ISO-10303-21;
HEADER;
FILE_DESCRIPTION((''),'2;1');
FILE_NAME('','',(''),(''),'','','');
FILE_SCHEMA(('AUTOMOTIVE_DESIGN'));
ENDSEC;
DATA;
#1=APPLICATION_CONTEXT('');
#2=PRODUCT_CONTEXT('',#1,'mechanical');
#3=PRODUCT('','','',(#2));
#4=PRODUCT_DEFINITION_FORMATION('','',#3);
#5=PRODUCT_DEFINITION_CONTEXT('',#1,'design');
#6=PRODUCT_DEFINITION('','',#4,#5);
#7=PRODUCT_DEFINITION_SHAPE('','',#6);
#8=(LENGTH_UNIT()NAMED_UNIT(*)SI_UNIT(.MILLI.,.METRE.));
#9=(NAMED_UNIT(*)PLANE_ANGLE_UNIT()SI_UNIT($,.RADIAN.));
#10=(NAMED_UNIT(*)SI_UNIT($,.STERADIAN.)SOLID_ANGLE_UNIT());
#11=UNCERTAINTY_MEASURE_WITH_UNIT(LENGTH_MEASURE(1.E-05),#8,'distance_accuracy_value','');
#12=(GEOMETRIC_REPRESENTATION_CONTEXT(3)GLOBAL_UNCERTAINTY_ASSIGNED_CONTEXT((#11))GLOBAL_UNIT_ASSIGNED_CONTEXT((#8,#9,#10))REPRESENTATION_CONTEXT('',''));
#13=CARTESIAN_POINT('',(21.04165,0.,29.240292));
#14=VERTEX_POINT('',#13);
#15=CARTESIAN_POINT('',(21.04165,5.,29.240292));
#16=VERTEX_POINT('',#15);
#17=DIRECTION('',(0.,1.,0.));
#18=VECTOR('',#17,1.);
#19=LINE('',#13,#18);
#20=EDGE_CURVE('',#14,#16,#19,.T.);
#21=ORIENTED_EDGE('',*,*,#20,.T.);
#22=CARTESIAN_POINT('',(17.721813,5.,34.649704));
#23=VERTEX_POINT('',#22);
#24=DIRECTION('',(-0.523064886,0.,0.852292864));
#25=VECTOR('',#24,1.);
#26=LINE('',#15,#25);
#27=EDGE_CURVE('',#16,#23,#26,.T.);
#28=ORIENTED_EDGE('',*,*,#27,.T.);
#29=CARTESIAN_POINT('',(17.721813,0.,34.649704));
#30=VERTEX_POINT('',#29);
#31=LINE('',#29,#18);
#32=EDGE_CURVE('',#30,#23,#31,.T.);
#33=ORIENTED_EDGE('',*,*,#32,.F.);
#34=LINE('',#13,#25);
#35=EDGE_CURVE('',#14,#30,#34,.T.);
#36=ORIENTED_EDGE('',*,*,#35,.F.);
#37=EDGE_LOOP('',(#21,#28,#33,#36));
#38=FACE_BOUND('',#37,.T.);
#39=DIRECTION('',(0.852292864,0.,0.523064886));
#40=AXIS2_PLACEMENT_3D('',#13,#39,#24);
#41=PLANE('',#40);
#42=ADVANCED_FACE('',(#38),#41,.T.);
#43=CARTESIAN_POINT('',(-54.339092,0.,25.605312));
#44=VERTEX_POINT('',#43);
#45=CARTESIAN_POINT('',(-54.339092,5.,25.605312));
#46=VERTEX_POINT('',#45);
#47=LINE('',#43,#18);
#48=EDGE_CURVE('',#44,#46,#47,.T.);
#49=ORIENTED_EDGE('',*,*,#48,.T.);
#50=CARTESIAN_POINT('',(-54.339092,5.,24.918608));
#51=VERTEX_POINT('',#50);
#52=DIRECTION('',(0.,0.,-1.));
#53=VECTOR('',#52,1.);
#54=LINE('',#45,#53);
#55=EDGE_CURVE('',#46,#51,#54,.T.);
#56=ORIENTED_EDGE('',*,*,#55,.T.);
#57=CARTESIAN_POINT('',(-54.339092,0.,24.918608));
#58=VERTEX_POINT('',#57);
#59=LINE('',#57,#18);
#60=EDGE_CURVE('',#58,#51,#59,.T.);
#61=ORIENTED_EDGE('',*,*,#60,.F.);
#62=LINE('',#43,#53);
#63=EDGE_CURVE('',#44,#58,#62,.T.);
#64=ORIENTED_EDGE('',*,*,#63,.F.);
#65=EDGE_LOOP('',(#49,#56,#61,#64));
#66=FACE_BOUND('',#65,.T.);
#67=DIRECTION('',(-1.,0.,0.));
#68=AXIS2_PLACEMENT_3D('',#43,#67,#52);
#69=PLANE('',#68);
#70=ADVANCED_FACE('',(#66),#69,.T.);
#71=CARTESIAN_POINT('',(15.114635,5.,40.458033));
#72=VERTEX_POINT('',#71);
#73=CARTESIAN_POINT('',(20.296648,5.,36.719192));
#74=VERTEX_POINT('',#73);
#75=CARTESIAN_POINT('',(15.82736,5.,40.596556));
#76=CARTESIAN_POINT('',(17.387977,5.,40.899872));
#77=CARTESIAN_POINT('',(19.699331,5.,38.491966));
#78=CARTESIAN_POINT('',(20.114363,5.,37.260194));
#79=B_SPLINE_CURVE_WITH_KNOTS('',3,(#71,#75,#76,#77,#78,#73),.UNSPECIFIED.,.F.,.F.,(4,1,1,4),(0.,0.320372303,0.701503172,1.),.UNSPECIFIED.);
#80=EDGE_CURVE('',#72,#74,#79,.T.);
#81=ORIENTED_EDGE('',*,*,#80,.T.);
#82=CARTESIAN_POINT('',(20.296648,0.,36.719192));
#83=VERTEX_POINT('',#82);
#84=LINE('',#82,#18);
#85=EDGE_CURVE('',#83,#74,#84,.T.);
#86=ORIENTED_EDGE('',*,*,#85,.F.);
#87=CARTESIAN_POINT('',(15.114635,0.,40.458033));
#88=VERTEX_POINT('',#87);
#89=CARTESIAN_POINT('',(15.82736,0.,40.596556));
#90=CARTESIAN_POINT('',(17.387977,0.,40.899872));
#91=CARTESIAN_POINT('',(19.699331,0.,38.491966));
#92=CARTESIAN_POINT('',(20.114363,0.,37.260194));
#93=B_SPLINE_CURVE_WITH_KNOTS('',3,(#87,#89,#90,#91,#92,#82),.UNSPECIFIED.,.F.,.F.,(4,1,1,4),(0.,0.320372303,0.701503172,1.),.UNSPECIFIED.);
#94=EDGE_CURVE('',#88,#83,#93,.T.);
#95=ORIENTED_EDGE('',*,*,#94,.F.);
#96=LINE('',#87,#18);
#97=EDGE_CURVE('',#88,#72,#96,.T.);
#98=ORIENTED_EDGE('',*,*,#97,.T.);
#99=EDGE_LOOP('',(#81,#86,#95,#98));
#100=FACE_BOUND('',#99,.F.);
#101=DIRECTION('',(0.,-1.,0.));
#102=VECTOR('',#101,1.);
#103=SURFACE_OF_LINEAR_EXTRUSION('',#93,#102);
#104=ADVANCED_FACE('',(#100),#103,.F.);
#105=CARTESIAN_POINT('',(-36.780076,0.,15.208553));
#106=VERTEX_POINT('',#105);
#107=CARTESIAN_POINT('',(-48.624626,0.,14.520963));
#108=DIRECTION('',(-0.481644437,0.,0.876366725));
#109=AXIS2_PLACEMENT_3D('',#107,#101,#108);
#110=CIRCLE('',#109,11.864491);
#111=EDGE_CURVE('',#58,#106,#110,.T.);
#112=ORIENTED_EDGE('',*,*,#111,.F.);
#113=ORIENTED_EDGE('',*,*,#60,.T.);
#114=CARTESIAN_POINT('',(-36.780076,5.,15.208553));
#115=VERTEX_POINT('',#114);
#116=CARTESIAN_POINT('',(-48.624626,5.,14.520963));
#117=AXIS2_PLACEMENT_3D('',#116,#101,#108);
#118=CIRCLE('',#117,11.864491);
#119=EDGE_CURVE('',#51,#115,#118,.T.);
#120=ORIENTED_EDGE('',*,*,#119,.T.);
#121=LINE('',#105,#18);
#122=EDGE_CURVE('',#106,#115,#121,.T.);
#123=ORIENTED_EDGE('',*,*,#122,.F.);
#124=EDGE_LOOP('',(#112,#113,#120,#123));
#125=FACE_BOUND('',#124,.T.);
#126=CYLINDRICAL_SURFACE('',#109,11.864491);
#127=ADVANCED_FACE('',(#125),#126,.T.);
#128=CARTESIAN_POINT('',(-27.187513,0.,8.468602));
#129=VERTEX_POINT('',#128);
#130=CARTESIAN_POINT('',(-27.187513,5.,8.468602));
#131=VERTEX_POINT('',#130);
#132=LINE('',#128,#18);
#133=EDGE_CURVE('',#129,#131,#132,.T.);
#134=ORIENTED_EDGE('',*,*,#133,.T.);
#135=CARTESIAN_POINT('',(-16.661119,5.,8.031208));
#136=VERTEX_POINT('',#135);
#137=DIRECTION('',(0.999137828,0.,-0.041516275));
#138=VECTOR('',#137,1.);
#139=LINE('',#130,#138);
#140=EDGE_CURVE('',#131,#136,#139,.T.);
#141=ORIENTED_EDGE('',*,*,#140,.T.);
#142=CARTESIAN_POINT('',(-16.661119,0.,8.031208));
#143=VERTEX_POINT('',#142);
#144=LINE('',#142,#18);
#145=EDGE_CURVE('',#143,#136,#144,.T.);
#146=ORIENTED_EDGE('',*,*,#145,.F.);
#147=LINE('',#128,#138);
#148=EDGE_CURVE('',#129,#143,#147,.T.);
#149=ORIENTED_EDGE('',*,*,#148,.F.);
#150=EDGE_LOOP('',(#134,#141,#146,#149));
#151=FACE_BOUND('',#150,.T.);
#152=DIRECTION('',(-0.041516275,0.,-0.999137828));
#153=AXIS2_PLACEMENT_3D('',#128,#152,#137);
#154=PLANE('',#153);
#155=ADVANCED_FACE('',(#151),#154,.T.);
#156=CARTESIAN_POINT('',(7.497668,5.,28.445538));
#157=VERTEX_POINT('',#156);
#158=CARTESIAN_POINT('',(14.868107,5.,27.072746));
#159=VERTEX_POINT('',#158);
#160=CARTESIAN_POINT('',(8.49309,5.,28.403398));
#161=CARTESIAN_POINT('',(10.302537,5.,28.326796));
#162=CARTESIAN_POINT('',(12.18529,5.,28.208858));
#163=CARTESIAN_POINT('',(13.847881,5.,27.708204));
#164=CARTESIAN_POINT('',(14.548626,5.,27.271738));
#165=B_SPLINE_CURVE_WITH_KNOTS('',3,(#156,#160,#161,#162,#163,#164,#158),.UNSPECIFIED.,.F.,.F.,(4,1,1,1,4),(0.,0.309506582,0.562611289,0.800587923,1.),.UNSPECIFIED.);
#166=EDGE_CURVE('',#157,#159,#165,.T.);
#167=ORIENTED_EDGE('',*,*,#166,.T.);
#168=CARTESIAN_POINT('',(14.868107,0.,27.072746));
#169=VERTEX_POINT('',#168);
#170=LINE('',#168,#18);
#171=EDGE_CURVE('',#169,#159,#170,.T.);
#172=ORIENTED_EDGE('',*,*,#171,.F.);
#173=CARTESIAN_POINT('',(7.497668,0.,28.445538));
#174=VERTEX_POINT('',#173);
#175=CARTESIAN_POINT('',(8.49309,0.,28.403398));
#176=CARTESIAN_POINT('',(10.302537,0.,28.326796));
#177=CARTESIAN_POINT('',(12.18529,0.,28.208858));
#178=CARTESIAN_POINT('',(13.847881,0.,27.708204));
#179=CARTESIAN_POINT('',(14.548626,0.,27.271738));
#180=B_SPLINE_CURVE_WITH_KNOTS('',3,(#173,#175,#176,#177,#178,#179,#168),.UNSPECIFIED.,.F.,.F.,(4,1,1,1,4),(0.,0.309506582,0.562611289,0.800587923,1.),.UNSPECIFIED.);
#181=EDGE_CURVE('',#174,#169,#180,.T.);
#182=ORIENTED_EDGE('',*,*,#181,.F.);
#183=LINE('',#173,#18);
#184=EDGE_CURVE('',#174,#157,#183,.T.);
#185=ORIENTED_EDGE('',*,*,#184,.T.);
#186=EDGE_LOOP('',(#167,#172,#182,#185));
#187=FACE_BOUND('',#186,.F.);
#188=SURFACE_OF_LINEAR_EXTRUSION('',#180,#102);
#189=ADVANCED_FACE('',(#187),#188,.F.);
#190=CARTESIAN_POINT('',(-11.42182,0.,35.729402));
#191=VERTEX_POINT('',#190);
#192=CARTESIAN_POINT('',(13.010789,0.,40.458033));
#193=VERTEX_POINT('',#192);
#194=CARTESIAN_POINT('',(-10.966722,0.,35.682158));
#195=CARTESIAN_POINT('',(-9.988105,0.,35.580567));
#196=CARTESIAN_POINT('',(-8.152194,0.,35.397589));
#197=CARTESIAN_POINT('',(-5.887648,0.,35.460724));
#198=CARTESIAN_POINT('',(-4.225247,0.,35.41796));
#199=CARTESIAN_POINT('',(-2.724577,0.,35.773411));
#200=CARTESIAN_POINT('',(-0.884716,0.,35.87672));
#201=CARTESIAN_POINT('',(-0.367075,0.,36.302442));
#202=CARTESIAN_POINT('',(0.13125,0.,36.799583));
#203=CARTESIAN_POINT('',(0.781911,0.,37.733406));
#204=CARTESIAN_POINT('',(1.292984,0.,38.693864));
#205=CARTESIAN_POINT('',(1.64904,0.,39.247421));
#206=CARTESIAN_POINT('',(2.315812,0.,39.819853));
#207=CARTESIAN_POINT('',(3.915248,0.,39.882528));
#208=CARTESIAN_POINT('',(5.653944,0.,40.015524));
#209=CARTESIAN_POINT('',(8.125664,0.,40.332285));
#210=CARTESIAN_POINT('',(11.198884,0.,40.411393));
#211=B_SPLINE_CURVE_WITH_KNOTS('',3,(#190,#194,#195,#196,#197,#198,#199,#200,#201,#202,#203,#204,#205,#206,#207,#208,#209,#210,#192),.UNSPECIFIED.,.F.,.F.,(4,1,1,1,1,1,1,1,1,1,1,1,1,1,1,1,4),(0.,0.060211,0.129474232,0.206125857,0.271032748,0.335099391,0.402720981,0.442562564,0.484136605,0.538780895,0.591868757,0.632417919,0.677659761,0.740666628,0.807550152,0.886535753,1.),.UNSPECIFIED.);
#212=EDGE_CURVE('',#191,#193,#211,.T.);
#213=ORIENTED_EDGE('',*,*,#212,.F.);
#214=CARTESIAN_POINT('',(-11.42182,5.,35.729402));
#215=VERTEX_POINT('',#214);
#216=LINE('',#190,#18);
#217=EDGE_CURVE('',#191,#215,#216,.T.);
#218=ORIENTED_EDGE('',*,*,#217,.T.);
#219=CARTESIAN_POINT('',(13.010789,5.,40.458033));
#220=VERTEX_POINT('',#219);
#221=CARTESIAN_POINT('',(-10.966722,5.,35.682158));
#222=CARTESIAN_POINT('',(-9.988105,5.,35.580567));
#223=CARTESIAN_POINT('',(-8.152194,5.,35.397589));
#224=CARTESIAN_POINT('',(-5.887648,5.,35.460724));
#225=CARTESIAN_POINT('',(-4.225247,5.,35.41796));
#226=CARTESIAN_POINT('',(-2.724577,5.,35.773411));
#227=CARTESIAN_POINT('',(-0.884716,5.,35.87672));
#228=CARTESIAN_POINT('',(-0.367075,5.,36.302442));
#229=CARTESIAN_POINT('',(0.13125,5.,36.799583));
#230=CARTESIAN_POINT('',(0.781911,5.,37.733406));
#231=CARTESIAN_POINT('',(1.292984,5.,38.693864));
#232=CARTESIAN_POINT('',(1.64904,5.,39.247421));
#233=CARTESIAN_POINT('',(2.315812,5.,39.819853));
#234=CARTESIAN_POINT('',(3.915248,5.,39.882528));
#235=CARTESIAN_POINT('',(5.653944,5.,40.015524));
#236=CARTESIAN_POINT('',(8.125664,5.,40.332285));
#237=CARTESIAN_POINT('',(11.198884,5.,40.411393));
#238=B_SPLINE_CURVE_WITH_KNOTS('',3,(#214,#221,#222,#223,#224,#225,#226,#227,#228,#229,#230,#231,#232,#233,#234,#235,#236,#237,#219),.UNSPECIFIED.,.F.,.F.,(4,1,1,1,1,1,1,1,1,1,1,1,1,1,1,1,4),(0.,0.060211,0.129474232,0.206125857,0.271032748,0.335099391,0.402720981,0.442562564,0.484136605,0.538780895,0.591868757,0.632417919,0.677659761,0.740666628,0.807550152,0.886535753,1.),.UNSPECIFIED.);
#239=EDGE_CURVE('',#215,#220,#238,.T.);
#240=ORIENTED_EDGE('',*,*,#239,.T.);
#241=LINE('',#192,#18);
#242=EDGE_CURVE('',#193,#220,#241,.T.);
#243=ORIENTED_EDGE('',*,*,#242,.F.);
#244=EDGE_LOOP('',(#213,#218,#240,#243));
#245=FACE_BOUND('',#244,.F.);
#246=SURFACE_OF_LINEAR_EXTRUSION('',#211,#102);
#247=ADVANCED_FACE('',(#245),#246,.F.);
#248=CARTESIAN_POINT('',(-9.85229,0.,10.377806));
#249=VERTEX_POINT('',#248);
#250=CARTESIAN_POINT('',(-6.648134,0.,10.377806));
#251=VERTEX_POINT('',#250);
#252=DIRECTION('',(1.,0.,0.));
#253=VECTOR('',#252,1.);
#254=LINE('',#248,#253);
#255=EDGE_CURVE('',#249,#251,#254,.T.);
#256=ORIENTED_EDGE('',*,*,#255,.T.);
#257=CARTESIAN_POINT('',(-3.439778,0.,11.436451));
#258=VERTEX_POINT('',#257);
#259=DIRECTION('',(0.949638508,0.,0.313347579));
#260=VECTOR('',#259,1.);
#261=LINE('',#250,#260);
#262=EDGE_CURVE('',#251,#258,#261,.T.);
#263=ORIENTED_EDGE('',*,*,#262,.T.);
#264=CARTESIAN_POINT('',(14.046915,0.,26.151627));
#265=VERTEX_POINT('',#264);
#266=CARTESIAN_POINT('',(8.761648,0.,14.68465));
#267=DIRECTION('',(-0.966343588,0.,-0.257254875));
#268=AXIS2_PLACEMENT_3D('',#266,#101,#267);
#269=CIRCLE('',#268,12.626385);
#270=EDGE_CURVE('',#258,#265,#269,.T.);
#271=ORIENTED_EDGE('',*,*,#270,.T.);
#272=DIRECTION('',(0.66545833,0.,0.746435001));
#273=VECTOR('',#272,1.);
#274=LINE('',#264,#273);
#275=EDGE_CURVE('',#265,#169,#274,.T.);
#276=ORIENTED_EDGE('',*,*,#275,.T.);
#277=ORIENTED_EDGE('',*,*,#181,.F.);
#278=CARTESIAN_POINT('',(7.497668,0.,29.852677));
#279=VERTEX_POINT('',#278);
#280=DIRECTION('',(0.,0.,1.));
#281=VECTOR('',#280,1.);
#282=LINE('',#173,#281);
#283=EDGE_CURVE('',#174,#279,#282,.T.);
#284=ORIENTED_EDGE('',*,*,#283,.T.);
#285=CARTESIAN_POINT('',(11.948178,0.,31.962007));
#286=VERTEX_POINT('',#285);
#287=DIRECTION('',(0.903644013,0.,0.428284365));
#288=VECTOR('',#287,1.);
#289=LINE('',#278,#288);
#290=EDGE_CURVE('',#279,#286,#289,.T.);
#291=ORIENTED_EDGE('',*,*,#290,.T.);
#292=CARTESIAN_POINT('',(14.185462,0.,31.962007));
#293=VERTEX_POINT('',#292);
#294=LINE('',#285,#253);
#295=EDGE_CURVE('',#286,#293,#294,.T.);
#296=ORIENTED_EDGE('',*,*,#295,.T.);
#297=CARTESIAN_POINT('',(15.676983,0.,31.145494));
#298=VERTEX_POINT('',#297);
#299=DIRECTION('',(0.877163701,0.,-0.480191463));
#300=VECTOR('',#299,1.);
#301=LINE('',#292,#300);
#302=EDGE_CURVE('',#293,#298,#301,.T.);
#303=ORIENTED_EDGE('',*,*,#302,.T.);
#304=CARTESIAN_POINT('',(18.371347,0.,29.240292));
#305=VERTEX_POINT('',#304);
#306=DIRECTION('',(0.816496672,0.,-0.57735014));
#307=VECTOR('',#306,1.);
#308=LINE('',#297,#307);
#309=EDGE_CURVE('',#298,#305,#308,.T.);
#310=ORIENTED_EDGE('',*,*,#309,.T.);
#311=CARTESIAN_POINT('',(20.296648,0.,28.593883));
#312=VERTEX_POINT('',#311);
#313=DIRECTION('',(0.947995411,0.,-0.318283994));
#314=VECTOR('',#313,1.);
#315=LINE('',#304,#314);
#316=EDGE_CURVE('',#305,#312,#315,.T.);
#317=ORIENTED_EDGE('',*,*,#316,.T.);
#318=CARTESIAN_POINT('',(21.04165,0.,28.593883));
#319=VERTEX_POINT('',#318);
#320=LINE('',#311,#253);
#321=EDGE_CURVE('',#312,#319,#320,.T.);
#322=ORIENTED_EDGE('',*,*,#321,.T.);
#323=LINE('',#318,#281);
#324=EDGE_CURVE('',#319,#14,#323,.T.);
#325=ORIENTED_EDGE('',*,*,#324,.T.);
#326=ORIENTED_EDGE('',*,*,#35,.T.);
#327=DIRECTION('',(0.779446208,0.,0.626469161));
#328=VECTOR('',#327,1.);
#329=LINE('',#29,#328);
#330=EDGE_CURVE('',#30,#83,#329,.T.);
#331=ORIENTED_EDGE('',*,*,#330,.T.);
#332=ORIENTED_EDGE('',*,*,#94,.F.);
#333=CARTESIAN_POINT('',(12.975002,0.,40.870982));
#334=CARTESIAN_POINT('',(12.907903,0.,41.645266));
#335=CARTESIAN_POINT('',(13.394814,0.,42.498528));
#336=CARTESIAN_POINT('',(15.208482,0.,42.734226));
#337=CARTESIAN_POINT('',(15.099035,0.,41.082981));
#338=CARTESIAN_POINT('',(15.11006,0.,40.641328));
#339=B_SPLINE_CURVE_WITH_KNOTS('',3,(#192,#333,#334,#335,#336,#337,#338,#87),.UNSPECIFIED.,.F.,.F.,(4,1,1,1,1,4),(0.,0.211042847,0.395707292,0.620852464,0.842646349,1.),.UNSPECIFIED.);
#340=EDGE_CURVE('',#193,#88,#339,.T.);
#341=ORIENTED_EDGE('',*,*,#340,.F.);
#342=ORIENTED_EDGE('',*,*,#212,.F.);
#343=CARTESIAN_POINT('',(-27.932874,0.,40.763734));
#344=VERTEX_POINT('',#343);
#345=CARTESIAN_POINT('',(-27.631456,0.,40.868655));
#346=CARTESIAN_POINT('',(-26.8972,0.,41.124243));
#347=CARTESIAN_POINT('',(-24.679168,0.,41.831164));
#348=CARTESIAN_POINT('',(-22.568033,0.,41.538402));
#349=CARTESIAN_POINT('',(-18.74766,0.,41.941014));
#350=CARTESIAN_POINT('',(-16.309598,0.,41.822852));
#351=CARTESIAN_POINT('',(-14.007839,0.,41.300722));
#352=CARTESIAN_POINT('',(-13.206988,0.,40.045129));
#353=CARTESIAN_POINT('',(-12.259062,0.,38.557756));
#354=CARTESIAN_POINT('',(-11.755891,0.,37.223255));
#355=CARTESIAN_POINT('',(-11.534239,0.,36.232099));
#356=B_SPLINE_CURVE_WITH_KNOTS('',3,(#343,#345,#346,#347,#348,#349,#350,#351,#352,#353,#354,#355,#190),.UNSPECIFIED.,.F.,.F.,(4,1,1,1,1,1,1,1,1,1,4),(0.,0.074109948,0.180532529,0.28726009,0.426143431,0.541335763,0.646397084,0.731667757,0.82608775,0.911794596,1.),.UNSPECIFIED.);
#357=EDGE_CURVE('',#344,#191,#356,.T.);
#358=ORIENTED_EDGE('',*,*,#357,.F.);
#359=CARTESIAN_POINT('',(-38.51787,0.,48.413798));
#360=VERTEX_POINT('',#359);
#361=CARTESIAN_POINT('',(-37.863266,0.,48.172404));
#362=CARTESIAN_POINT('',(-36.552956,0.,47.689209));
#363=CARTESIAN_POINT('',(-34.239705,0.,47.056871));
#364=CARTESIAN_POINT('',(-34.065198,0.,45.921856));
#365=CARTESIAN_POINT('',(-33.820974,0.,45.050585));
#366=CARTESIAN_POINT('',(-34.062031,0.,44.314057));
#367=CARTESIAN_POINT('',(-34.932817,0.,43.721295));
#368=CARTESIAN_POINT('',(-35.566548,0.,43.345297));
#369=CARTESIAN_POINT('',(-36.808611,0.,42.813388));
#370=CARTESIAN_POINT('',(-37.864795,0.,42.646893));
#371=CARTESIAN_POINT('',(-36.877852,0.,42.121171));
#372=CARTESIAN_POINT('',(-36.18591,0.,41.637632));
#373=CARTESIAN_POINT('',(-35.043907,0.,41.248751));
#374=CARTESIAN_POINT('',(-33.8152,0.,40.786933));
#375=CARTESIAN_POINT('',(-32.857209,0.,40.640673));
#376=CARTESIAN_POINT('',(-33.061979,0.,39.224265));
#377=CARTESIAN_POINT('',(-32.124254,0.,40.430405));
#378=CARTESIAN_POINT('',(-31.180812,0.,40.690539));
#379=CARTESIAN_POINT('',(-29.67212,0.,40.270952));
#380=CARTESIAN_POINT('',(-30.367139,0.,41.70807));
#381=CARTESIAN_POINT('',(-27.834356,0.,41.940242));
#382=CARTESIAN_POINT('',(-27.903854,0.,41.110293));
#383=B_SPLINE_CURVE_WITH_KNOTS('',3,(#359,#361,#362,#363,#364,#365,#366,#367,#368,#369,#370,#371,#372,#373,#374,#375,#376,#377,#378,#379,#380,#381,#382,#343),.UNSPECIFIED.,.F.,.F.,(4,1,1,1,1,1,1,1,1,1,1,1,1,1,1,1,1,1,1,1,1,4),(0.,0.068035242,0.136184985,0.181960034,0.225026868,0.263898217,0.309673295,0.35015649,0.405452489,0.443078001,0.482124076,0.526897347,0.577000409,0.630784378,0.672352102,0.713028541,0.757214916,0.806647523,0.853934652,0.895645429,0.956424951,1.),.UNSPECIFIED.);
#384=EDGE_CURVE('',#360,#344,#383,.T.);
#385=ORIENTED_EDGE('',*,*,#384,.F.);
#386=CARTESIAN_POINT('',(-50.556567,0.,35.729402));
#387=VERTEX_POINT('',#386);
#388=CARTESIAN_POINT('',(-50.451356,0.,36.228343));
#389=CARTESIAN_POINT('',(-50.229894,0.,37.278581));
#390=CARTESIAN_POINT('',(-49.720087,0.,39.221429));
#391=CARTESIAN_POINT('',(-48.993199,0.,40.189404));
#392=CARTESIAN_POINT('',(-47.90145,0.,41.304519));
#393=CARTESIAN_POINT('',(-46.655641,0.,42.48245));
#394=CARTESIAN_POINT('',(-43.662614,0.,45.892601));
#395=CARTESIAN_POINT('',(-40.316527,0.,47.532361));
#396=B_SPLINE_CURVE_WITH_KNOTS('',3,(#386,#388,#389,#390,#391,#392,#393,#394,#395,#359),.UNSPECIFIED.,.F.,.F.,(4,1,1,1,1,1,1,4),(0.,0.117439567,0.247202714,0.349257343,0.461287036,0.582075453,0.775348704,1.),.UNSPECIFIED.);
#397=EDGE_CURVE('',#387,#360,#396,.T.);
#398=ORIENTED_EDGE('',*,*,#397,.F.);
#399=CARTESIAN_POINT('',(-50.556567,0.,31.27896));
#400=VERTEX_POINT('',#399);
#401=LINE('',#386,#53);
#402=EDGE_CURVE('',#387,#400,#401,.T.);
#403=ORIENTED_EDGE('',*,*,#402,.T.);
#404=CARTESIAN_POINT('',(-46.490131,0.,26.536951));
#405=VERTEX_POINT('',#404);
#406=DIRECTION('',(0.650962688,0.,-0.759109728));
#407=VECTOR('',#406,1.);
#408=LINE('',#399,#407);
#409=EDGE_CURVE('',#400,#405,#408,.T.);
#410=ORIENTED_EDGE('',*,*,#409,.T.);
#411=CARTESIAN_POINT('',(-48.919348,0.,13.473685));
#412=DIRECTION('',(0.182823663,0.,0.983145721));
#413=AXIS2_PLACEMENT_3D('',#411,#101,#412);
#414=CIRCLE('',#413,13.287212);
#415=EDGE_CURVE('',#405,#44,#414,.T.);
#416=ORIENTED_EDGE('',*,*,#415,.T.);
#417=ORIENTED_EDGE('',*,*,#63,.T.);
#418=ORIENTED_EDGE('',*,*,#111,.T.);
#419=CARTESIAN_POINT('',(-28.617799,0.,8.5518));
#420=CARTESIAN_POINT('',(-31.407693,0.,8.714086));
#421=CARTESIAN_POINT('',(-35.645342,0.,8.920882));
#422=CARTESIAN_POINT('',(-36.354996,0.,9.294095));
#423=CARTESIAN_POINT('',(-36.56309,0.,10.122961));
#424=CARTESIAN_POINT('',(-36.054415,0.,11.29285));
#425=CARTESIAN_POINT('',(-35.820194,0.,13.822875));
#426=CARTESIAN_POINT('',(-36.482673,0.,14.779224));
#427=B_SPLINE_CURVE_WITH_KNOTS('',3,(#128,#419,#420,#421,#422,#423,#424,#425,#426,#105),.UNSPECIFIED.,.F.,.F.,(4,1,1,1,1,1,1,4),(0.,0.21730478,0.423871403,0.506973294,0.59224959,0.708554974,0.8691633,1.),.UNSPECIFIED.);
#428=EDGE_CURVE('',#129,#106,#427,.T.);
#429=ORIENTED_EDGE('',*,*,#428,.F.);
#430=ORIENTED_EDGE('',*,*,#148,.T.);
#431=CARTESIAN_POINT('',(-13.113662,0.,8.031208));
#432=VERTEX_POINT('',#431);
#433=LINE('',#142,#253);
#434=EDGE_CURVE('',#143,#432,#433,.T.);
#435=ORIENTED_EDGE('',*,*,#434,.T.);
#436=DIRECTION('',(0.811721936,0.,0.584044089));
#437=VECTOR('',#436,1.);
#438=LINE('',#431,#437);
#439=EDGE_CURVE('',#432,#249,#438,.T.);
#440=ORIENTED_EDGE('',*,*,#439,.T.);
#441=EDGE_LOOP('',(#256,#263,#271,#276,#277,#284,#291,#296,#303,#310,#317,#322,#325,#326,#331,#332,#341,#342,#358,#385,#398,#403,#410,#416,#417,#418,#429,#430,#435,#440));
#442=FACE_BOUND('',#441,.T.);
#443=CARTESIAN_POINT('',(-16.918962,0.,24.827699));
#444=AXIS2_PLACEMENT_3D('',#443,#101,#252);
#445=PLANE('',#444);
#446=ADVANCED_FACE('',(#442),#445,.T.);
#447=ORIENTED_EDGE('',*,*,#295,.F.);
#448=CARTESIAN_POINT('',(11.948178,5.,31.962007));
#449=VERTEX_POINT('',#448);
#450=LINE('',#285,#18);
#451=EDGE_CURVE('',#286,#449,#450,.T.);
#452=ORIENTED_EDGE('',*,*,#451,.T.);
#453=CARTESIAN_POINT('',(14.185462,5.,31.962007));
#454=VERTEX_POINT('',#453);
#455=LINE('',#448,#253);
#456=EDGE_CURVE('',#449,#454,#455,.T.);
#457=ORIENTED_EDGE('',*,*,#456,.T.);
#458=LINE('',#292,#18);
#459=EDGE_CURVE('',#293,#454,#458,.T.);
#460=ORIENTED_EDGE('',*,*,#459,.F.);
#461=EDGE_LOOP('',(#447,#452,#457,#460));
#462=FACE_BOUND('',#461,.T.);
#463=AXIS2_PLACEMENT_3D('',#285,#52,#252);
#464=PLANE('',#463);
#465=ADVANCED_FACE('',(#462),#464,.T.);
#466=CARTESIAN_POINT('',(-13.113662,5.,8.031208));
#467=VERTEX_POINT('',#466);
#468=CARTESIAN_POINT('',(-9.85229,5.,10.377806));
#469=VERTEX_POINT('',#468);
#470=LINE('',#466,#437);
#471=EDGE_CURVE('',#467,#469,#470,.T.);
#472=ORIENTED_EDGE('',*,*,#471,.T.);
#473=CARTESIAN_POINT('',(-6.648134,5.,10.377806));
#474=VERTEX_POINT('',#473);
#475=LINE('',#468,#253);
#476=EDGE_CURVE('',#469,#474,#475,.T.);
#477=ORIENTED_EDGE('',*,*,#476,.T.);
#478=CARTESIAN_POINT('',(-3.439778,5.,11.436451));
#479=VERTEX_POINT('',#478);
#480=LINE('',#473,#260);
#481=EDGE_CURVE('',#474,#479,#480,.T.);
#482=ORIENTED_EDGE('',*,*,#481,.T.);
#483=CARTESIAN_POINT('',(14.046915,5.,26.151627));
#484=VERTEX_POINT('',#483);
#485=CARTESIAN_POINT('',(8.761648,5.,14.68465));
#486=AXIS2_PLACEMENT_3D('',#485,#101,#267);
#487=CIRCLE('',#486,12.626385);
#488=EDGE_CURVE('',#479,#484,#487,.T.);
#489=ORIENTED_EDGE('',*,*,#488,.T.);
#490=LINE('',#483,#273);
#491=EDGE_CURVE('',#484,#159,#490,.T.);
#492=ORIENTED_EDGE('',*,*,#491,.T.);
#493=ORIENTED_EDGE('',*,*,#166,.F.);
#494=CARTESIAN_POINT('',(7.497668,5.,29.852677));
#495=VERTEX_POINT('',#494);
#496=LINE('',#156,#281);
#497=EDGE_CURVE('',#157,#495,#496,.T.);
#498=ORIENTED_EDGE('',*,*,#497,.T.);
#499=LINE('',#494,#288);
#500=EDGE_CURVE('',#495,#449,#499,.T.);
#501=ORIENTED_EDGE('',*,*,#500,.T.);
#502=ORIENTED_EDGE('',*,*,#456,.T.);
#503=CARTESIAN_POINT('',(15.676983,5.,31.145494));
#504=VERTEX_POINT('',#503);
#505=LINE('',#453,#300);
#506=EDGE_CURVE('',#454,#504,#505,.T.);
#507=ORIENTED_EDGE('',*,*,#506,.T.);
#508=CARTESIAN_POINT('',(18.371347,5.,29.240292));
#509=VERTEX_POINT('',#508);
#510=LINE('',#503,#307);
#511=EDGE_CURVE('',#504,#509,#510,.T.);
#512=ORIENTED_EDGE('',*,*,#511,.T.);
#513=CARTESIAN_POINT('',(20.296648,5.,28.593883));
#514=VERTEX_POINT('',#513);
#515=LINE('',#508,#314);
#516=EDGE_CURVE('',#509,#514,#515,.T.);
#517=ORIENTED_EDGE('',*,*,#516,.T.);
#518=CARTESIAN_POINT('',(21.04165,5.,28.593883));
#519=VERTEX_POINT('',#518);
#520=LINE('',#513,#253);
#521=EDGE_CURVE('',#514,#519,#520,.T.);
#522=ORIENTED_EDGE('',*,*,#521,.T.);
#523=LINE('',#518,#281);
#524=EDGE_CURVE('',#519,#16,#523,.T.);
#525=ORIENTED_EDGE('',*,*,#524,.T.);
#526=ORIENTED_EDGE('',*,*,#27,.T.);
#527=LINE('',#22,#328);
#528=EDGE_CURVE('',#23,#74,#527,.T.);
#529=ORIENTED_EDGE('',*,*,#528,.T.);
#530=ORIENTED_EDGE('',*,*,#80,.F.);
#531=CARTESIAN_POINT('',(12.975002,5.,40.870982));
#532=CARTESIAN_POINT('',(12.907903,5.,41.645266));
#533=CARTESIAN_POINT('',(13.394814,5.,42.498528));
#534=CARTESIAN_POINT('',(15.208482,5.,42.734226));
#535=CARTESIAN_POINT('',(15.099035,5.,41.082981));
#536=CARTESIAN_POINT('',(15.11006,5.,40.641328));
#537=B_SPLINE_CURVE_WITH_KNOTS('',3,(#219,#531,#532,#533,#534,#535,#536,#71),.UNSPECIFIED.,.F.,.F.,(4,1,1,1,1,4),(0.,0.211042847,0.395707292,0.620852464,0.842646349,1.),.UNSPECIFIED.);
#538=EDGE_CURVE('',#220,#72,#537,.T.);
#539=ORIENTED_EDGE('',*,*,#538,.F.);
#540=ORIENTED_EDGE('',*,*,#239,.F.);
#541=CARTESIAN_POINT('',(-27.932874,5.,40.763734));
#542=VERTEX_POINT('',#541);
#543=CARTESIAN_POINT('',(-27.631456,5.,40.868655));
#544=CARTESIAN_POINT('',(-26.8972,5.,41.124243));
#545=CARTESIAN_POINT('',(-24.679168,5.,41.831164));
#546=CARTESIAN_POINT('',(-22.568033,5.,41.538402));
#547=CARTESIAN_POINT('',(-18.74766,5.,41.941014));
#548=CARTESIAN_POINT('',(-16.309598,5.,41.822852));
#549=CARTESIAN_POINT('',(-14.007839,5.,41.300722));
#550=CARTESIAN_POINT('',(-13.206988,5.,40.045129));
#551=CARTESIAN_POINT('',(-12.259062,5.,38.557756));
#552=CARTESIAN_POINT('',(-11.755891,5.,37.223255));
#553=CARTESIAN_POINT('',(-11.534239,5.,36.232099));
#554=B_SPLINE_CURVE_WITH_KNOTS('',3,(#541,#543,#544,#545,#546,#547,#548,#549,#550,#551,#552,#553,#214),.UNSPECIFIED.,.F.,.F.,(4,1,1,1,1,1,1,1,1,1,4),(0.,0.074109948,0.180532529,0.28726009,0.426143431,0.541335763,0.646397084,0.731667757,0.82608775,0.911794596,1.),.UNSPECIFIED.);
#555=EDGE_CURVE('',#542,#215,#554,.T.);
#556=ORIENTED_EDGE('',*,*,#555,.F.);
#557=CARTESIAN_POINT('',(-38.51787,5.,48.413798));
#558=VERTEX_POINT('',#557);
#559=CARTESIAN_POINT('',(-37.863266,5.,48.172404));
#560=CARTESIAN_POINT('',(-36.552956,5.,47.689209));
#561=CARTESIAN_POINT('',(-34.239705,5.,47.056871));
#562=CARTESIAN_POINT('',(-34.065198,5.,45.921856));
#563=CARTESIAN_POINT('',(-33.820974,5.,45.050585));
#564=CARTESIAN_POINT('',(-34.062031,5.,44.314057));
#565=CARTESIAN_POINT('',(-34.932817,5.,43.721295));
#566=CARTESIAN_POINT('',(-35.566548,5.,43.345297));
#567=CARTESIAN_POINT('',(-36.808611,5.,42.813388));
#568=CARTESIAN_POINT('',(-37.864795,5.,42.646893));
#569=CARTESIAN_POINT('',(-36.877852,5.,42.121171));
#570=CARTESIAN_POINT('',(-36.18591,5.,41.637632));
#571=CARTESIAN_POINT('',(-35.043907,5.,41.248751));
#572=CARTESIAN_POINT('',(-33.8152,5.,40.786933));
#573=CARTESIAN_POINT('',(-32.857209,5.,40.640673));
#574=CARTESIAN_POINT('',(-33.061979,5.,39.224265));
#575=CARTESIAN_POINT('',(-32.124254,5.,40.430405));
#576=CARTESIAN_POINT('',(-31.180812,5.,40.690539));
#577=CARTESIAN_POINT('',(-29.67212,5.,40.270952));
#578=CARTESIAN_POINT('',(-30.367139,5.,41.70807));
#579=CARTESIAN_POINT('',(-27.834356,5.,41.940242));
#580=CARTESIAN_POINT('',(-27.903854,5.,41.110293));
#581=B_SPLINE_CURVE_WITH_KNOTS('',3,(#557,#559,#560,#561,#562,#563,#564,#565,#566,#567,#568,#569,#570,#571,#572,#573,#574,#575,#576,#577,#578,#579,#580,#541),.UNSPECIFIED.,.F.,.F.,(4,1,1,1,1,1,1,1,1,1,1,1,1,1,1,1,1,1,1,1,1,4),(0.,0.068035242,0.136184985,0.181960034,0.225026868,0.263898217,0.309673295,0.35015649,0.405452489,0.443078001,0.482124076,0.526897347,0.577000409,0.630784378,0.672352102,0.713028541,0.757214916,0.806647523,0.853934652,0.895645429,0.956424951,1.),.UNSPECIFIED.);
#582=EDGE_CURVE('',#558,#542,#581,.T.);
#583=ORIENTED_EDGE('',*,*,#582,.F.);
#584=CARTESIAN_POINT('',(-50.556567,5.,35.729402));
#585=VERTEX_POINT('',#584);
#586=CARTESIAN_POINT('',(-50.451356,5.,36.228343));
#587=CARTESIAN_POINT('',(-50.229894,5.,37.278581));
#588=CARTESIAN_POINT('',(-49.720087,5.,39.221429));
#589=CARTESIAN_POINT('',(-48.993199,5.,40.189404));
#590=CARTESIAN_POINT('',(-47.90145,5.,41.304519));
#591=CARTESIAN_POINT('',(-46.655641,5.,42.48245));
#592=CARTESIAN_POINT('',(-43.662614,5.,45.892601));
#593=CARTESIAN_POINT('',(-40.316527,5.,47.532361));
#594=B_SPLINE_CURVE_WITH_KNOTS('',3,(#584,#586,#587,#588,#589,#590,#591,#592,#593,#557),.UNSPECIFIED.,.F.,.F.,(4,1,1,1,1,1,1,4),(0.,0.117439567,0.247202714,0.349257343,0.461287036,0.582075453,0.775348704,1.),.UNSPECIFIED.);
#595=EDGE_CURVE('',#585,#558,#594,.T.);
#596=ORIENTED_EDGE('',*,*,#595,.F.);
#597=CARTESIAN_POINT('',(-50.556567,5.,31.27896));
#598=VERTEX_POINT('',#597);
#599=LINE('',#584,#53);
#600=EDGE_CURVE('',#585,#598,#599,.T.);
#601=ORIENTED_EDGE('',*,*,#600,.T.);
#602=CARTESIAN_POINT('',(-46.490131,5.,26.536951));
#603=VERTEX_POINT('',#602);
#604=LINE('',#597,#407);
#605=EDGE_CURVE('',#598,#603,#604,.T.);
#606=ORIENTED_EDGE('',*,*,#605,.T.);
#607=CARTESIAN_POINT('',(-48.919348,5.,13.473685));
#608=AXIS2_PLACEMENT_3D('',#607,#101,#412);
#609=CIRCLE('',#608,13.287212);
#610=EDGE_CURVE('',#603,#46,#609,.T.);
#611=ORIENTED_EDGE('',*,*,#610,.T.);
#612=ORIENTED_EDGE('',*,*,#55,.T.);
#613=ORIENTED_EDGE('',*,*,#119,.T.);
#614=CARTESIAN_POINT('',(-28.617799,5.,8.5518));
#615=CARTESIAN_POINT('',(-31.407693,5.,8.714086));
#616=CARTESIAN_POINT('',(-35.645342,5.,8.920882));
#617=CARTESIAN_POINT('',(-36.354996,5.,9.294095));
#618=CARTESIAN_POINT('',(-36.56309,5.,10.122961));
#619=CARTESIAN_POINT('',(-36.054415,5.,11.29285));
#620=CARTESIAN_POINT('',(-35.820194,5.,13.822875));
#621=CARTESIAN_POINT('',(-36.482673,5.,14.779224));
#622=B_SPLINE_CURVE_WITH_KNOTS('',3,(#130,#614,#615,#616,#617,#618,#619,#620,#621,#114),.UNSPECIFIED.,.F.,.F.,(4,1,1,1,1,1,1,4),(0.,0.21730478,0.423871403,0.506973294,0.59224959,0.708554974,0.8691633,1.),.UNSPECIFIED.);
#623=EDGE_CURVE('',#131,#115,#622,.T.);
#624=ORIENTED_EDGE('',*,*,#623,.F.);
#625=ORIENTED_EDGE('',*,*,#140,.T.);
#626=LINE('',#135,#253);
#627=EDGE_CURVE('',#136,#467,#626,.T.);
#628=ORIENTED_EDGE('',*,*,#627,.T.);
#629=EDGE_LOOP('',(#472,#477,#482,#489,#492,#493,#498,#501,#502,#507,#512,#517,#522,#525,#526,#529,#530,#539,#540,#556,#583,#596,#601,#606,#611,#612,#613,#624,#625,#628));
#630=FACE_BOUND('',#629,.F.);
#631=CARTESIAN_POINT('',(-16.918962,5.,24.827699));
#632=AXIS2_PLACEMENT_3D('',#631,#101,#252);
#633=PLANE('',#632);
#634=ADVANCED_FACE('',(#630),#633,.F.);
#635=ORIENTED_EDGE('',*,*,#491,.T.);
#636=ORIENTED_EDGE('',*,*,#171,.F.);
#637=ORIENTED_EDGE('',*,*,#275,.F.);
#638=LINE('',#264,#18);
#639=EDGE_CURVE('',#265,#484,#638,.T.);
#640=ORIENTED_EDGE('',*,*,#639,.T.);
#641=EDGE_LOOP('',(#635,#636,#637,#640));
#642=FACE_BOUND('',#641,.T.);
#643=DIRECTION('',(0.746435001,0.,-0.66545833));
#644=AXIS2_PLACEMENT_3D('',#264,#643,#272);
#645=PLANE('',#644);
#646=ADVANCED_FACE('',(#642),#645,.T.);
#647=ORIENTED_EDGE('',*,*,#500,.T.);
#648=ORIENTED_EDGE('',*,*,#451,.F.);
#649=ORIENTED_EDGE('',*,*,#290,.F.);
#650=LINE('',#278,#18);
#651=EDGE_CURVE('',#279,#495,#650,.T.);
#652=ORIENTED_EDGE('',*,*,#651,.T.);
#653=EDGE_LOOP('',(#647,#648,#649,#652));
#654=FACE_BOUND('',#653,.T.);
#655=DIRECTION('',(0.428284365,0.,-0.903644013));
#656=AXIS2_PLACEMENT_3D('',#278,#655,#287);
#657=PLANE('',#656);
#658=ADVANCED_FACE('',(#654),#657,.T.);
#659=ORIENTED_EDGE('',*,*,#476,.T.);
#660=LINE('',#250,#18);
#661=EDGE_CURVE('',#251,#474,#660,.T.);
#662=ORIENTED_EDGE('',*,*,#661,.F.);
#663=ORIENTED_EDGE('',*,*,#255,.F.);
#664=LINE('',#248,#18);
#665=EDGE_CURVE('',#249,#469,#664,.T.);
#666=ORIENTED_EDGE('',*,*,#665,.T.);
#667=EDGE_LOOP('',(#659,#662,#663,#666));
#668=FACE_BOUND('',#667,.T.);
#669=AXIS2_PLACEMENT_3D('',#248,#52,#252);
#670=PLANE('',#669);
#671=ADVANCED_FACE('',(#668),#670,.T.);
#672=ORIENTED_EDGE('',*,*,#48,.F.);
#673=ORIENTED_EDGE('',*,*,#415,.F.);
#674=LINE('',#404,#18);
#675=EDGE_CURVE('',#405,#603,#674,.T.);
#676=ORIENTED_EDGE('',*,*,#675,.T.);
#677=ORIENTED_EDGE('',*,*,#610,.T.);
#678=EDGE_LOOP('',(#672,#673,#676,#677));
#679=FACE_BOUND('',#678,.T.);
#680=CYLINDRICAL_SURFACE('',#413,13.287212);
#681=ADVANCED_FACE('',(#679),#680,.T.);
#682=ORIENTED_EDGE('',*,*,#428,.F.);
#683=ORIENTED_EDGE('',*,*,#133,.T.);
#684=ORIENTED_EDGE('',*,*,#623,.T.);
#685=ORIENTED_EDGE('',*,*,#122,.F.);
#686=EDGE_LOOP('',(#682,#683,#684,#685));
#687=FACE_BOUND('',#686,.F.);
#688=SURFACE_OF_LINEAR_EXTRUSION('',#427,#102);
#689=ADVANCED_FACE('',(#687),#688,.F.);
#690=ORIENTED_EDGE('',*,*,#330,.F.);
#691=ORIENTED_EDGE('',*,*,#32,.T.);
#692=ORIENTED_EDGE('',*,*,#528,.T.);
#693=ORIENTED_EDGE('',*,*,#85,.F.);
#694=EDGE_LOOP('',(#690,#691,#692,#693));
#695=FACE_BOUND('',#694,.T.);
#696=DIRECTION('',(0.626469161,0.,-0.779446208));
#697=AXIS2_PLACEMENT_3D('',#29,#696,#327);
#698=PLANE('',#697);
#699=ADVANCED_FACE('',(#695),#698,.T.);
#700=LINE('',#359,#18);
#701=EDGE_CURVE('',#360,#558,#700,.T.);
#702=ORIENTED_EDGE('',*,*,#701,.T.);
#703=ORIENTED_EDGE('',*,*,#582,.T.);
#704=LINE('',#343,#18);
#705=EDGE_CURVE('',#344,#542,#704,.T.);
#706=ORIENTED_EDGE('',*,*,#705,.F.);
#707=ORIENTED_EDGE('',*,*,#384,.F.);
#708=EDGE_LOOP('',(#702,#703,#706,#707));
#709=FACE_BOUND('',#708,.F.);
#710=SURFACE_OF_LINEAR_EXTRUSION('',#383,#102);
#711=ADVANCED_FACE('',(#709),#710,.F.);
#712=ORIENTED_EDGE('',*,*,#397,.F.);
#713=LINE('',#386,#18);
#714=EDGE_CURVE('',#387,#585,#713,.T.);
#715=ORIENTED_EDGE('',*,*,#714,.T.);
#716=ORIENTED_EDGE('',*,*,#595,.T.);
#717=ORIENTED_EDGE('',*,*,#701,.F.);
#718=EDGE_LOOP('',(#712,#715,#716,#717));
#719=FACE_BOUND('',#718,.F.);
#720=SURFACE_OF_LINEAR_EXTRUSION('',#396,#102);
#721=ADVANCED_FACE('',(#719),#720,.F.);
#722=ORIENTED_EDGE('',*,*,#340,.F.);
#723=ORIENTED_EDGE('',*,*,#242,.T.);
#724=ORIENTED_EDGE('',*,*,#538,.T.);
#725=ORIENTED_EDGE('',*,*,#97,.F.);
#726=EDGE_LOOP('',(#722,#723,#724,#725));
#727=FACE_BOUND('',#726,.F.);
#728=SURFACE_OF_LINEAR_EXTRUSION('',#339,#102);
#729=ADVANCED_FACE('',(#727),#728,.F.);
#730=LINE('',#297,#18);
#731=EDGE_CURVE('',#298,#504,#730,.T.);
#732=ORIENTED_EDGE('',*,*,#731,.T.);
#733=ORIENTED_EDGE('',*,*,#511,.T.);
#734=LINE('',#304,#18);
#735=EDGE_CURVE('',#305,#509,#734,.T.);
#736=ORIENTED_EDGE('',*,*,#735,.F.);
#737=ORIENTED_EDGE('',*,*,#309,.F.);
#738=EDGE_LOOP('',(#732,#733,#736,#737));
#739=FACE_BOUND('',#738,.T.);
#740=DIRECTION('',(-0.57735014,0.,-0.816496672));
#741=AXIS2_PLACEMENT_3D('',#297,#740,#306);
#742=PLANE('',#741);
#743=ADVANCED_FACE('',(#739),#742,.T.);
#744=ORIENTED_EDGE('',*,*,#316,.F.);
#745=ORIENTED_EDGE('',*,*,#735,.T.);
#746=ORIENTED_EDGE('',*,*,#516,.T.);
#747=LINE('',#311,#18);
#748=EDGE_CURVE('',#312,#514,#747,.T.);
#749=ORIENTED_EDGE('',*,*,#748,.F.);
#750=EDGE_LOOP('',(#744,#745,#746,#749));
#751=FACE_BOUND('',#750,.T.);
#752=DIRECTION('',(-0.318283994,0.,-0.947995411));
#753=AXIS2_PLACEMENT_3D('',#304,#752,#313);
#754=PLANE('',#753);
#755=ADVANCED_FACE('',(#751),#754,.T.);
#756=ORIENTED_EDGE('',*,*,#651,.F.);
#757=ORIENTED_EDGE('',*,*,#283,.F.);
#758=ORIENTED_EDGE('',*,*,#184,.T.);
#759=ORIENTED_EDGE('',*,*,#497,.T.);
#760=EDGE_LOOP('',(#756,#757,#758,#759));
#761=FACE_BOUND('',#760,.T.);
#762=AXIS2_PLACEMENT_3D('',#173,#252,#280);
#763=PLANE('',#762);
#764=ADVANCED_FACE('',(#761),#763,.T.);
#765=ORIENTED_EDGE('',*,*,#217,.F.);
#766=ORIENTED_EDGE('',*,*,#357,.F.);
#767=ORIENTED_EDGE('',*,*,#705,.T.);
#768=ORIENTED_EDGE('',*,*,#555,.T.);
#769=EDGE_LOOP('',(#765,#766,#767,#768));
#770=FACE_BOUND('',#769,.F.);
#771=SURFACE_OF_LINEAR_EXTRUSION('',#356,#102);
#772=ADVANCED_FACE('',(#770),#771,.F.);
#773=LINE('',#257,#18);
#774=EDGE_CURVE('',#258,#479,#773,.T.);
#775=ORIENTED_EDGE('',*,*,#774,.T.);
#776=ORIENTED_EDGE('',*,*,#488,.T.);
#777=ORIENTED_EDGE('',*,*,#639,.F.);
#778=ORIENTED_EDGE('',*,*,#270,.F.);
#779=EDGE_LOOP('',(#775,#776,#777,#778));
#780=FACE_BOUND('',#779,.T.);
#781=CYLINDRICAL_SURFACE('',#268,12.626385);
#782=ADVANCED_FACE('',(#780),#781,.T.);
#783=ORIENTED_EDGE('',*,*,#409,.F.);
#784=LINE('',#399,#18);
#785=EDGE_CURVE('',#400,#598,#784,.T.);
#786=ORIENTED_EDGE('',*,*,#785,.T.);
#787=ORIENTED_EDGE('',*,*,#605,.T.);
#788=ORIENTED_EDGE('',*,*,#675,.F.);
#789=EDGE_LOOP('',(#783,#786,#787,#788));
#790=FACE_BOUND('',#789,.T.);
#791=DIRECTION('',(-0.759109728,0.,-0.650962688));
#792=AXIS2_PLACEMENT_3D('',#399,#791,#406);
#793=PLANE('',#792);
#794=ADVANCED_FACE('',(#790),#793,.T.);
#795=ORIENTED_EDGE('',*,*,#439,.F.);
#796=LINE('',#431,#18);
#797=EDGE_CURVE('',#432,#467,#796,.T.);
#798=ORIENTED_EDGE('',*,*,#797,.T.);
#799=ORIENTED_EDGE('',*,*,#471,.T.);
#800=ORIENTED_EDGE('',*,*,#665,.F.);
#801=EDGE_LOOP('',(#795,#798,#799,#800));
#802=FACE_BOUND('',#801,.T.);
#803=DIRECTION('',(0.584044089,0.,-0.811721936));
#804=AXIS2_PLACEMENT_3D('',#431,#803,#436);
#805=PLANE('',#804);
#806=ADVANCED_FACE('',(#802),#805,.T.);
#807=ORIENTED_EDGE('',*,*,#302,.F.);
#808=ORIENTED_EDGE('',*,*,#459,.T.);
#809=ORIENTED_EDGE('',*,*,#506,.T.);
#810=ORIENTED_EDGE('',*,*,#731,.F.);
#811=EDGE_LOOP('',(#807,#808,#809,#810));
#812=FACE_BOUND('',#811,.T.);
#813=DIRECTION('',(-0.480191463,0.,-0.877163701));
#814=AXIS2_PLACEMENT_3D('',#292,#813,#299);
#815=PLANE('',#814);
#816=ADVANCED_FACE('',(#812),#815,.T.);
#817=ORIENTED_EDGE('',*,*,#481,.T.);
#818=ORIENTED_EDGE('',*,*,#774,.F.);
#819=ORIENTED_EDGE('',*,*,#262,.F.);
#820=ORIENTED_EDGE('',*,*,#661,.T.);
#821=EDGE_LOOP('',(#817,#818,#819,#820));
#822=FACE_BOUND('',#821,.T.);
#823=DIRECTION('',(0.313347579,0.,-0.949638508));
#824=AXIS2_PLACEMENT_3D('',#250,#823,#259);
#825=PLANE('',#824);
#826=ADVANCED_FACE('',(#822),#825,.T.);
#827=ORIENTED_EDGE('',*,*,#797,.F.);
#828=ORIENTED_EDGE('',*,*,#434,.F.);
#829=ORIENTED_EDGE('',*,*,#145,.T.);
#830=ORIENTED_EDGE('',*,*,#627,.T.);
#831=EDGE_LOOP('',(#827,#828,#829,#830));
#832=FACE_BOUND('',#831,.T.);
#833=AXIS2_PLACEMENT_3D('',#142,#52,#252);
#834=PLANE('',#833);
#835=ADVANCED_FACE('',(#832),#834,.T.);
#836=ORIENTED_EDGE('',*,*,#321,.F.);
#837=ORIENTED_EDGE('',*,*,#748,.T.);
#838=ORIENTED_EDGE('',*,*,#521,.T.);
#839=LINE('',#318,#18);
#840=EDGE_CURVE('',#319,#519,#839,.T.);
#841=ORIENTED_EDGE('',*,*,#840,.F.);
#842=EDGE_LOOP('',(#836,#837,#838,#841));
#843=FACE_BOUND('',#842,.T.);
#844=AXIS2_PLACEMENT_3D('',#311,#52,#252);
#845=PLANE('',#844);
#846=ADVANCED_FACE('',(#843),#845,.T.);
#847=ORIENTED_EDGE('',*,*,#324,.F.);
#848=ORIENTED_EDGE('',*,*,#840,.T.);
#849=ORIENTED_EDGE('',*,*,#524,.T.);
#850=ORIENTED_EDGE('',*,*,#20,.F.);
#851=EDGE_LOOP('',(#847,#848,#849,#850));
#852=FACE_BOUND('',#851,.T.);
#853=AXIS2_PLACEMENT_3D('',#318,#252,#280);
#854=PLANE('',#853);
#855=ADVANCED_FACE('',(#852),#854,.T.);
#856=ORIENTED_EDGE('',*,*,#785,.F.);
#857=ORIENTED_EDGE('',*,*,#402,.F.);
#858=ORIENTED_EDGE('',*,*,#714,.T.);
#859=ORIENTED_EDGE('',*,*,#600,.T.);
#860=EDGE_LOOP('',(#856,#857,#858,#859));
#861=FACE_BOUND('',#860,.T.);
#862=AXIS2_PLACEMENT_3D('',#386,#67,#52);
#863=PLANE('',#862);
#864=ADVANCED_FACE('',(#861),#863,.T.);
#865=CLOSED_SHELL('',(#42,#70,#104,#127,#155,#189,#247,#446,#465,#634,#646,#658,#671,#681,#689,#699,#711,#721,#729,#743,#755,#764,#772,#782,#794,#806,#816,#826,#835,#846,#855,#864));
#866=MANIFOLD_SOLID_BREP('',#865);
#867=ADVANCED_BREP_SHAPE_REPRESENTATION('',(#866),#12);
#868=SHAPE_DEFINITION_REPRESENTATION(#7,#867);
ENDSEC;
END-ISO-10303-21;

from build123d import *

# Parameters (mm, degrees)
F2_DEPTH  = 10
F14_SCALE = 0.5


# Not quite as in the source:
# - a feature names something its author has since deleted; it is built from what else it names
# - the program builds the solid bodies; features that only make, move or delete a surface that nothing else refers to are left out


with BuildPart() as f2:
    # F0 (on Front) → F2 (new body)
    with BuildSketch(Plane.XZ):
        with BuildLine():
            Line((-70.1603144407, 2.7968266513), (-70.1603144407, 1.4234187547))
            ThreePointArc((-70.1603144407, 1.4234187547), (-70.2145489266, -40.1372623928), (-35.0422821939, -17.99669303))
            add(Edge.make_bspline(
                [(-15.8571563661, -31.4765945077), (-18.7177282322, -31.3101976564), (-24.2975162547, -30.9856264864), (-32.7728139412, -30.5720339527), (-34.1921223492, -29.8256076047), (-34.6083105275, -28.1678758484), (-33.5909596521, -25.8280983966), (-33.1225179299, -20.7680472143), (-34.4474763908, -18.8553492631), (-35.0422821939, -17.99669303)],
                knots=[0, 0, 0, 0, 0.2173047805, 0.4238714034, 0.5069732944, 0.59224959, 0.7085549741, 0.8691633, 1, 1, 1, 1], degree=3))
            Line((-15.8571563661, -31.4765945077), (5.1956321113, -32.3513820767))
            Line((5.1956321113, -32.3513820767), (12.2905466706, -32.3513820767))
            Line((12.2905466706, -32.3513820767), (18.8132897019, -27.6581868529))
            Line((18.8132897019, -27.6581868529), (25.2216011286, -27.6581868529))
            Line((25.2216011286, -27.6581868529), (31.6383130848, -25.5408957601))
            ThreePointArc((31.6383130848, -25.5408957601), (72.3006146402, -38.3663180252), (66.61169976, 3.8894563913))
            Line((66.61169976, 3.8894563913), (68.254083395, 5.7316944003))
            add(Edge.make_bspline(
                [(53.5132065415, 8.4772780538), (55.5040504231, 8.3929973978), (59.1229435492, 8.2397946834), (62.8884494062, 8.0039185472), (66.2136316185, 7.0026107145), (67.6151226177, 6.1296776731), (68.254083395, 5.7316944003)],
                knots=[0, 0, 0, 0, 0.309506582, 0.5626112888, 0.8005879231, 1, 1, 1, 1], degree=3))
            Line((53.5132065415, 8.4772780538), (53.5132065415, 11.2915560603))
            Line((53.5132065415, 11.2915560603), (62.4142251909, 15.5102163553))
            Line((62.4142251909, 15.5102163553), (66.8887943029, 15.5102163553))
            Line((66.8887943029, 15.5102163553), (69.8718354106, 13.8771906495))
            Line((69.8718354106, 13.8771906495), (75.2605646849, 10.0667849183))
            Line((75.2605646849, 10.0667849183), (79.1111662984, 8.7739676237))
            Line((79.1111662984, 8.7739676237), (80.6011706591, 8.7739676237))
            Line((80.6011706591, 8.7739676237), (80.6011706591, 10.0667849183))
            Line((80.6011706591, 10.0667849183), (73.9614963531, 20.8856090903))
            Line((73.9614963531, 20.8856090903), (79.1111662984, 25.0245854259))
            add(Edge.make_bspline(
                [(68.7471404672, 32.5022675097), (70.1725898279, 32.7793130486), (73.2938248363, 33.3859457769), (77.916531806, 28.5701341988), (78.7465965554, 26.1065898492), (79.1111662984, 25.0245854259)],
                knots=[0, 0, 0, 0, 0.320372303, 0.7015031719, 1, 1, 1, 1], degree=3))
            add(Edge.make_bspline(
                [(64.5394474268, 32.5022675097), (64.4678746972, 33.3281659297), (64.3336751663, 34.8767331162), (65.3074974299, 36.583257466), (68.9348334976, 37.0546546226), (68.7159394615, 33.752163088), (68.7379893371, 32.8688568812), (68.7471404672, 32.5022675097)],
                knots=[0, 0, 0, 0, 0.2110428468, 0.3957072923, 0.6208524643, 0.8426463487, 1, 1, 1, 1], degree=3))
            add(Edge.make_bspline(
                [(15.6742297113, 23.0450052768), (16.5844261538, 22.950517427), (18.5416596475, 22.7473362503), (22.2134815433, 22.3813790317), (26.7425739772, 22.5076492148), (30.0673752989, 22.4221219429), (33.0687156287, 23.1330233641), (36.7484371708, 23.3396420412), (37.7837193781, 24.1910856931), (38.7803693746, 25.1853678195), (40.0816926768, 27.0530140531), (41.1038373203, 28.9739302108), (41.8159494962, 30.0810432773), (43.1494936511, 31.2259085067), (46.3483660216, 31.3512583703), (49.825758526, 31.617249819), (54.7691971013, 32.2507714382), (60.915638935, 32.4089870339), (64.5394474268, 32.5022675097)],
                knots=[0, 0, 0, 0, 0.0602109997, 0.1294742319, 0.206125857, 0.2710327483, 0.3350993906, 0.4027209808, 0.442562564, 0.4841366051, 0.5387808948, 0.5918687573, 0.632417919, 0.6776597614, 0.7406666278, 0.8075501518, 0.886535753, 1, 1, 1, 1], degree=3))
            add(Edge.make_bspline(
                [(-17.3478778452, 33.1136696041), (-16.7450423087, 33.3235113693), (-15.2765292766, 33.8346878815), (-10.8404654954, 35.2485304708), (-6.6181952167, 34.6630061736), (1.0225500837, 35.4682293276), (5.8986738705, 35.2319050649), (10.5021919637, 34.1876461101), (12.1038937154, 31.6764601114), (13.9997454046, 28.7017140278), (15.0060882242, 26.0327120836), (15.4493929289, 24.0504006879), (15.6742297113, 23.0450052768)],
                knots=[0, 0, 0, 0, 0.0741099478, 0.1805325293, 0.28726009, 0.4261434308, 0.5413357632, 0.6463970839, 0.7316677568, 0.8260877502, 0.9117945958, 1, 1, 1, 1], degree=3))
            add(Edge.make_bspline(
                [(-38.5178700089, 48.413798213), (-37.2086618929, 47.9310095594), (-34.5880423183, 46.9646197389), (-29.9615394566, 45.6999431744), (-29.6125265988, 43.4299128331), (-29.1240780119, 41.6873723706), (-29.6061919281, 40.2143165806), (-31.3477649295, 39.0287920321), (-32.6152258482, 38.2767963146), (-35.0993510451, 37.2129778975), (-37.2117205405, 36.8799871988), (-35.2378339505, 35.8285430158), (-33.8539497276, 34.8614651493), (-31.5699444534, 34.0837040019), (-29.1125300687, 33.1600673113), (-27.1965479006, 32.8675475679), (-27.6060878868, 30.0347312892), (-25.7306387383, 32.44701128), (-23.8437548611, 32.9672791313), (-20.8263691722, 32.1281067533), (-22.2164084081, 35.0023418104), (-17.1508415545, 35.4666855058), (-17.2898376362, 33.8067882885), (-17.3478778452, 33.1136696041)],
                knots=[0, 0, 0, 0, 0.0680352424, 0.1361849854, 0.1819600343, 0.2250268681, 0.2638982165, 0.3096732947, 0.3501564903, 0.4054524889, 0.4430780006, 0.4821240757, 0.5268973467, 0.5770004087, 0.6307843783, 0.6723521021, 0.7130285408, 0.7572149163, 0.8066475228, 0.8539346518, 0.8956454287, 0.9564249506, 1, 1, 1, 1], degree=3))
            add(Edge.make_bspline(
                [(-62.5952631235, 23.0450052768), (-62.3848416036, 24.0428871056), (-61.9419178755, 26.1433639955), (-60.9223040871, 30.0290599328), (-59.4685270888, 31.9650102976), (-57.2850306102, 34.1952396219), (-54.7934110836, 36.5511024905), (-48.8073579355, 43.3714030755), (-42.1151835801, 46.6509236571), (-38.5178700089, 48.413798213)],
                knots=[0, 0, 0, 0, 0.1174395667, 0.2472027136, 0.3492573428, 0.4612870362, 0.5820754532, 0.7753487037, 1, 1, 1, 1], degree=3))
            Line((-62.5952631235, 23.0450052768), (-62.5952631235, 14.1441216692))
            Line((-62.5952631235, 14.1441216692), (-54.4623918831, 4.6601039357))
            ThreePointArc((-54.4623918831, 4.6601039357), (-62.4531100103, 4.922752395), (-70.1603144407, 2.7968266513))
        make_face()
    extrude(amount=-F2_DEPTH)


with BuildPart() as f2_1:
    # F14: moved
    add(f2.part.scale(F14_SCALE).moved(Location((-19.2589350045, 0, 24.2068991065))))


solid = f2_1.part
